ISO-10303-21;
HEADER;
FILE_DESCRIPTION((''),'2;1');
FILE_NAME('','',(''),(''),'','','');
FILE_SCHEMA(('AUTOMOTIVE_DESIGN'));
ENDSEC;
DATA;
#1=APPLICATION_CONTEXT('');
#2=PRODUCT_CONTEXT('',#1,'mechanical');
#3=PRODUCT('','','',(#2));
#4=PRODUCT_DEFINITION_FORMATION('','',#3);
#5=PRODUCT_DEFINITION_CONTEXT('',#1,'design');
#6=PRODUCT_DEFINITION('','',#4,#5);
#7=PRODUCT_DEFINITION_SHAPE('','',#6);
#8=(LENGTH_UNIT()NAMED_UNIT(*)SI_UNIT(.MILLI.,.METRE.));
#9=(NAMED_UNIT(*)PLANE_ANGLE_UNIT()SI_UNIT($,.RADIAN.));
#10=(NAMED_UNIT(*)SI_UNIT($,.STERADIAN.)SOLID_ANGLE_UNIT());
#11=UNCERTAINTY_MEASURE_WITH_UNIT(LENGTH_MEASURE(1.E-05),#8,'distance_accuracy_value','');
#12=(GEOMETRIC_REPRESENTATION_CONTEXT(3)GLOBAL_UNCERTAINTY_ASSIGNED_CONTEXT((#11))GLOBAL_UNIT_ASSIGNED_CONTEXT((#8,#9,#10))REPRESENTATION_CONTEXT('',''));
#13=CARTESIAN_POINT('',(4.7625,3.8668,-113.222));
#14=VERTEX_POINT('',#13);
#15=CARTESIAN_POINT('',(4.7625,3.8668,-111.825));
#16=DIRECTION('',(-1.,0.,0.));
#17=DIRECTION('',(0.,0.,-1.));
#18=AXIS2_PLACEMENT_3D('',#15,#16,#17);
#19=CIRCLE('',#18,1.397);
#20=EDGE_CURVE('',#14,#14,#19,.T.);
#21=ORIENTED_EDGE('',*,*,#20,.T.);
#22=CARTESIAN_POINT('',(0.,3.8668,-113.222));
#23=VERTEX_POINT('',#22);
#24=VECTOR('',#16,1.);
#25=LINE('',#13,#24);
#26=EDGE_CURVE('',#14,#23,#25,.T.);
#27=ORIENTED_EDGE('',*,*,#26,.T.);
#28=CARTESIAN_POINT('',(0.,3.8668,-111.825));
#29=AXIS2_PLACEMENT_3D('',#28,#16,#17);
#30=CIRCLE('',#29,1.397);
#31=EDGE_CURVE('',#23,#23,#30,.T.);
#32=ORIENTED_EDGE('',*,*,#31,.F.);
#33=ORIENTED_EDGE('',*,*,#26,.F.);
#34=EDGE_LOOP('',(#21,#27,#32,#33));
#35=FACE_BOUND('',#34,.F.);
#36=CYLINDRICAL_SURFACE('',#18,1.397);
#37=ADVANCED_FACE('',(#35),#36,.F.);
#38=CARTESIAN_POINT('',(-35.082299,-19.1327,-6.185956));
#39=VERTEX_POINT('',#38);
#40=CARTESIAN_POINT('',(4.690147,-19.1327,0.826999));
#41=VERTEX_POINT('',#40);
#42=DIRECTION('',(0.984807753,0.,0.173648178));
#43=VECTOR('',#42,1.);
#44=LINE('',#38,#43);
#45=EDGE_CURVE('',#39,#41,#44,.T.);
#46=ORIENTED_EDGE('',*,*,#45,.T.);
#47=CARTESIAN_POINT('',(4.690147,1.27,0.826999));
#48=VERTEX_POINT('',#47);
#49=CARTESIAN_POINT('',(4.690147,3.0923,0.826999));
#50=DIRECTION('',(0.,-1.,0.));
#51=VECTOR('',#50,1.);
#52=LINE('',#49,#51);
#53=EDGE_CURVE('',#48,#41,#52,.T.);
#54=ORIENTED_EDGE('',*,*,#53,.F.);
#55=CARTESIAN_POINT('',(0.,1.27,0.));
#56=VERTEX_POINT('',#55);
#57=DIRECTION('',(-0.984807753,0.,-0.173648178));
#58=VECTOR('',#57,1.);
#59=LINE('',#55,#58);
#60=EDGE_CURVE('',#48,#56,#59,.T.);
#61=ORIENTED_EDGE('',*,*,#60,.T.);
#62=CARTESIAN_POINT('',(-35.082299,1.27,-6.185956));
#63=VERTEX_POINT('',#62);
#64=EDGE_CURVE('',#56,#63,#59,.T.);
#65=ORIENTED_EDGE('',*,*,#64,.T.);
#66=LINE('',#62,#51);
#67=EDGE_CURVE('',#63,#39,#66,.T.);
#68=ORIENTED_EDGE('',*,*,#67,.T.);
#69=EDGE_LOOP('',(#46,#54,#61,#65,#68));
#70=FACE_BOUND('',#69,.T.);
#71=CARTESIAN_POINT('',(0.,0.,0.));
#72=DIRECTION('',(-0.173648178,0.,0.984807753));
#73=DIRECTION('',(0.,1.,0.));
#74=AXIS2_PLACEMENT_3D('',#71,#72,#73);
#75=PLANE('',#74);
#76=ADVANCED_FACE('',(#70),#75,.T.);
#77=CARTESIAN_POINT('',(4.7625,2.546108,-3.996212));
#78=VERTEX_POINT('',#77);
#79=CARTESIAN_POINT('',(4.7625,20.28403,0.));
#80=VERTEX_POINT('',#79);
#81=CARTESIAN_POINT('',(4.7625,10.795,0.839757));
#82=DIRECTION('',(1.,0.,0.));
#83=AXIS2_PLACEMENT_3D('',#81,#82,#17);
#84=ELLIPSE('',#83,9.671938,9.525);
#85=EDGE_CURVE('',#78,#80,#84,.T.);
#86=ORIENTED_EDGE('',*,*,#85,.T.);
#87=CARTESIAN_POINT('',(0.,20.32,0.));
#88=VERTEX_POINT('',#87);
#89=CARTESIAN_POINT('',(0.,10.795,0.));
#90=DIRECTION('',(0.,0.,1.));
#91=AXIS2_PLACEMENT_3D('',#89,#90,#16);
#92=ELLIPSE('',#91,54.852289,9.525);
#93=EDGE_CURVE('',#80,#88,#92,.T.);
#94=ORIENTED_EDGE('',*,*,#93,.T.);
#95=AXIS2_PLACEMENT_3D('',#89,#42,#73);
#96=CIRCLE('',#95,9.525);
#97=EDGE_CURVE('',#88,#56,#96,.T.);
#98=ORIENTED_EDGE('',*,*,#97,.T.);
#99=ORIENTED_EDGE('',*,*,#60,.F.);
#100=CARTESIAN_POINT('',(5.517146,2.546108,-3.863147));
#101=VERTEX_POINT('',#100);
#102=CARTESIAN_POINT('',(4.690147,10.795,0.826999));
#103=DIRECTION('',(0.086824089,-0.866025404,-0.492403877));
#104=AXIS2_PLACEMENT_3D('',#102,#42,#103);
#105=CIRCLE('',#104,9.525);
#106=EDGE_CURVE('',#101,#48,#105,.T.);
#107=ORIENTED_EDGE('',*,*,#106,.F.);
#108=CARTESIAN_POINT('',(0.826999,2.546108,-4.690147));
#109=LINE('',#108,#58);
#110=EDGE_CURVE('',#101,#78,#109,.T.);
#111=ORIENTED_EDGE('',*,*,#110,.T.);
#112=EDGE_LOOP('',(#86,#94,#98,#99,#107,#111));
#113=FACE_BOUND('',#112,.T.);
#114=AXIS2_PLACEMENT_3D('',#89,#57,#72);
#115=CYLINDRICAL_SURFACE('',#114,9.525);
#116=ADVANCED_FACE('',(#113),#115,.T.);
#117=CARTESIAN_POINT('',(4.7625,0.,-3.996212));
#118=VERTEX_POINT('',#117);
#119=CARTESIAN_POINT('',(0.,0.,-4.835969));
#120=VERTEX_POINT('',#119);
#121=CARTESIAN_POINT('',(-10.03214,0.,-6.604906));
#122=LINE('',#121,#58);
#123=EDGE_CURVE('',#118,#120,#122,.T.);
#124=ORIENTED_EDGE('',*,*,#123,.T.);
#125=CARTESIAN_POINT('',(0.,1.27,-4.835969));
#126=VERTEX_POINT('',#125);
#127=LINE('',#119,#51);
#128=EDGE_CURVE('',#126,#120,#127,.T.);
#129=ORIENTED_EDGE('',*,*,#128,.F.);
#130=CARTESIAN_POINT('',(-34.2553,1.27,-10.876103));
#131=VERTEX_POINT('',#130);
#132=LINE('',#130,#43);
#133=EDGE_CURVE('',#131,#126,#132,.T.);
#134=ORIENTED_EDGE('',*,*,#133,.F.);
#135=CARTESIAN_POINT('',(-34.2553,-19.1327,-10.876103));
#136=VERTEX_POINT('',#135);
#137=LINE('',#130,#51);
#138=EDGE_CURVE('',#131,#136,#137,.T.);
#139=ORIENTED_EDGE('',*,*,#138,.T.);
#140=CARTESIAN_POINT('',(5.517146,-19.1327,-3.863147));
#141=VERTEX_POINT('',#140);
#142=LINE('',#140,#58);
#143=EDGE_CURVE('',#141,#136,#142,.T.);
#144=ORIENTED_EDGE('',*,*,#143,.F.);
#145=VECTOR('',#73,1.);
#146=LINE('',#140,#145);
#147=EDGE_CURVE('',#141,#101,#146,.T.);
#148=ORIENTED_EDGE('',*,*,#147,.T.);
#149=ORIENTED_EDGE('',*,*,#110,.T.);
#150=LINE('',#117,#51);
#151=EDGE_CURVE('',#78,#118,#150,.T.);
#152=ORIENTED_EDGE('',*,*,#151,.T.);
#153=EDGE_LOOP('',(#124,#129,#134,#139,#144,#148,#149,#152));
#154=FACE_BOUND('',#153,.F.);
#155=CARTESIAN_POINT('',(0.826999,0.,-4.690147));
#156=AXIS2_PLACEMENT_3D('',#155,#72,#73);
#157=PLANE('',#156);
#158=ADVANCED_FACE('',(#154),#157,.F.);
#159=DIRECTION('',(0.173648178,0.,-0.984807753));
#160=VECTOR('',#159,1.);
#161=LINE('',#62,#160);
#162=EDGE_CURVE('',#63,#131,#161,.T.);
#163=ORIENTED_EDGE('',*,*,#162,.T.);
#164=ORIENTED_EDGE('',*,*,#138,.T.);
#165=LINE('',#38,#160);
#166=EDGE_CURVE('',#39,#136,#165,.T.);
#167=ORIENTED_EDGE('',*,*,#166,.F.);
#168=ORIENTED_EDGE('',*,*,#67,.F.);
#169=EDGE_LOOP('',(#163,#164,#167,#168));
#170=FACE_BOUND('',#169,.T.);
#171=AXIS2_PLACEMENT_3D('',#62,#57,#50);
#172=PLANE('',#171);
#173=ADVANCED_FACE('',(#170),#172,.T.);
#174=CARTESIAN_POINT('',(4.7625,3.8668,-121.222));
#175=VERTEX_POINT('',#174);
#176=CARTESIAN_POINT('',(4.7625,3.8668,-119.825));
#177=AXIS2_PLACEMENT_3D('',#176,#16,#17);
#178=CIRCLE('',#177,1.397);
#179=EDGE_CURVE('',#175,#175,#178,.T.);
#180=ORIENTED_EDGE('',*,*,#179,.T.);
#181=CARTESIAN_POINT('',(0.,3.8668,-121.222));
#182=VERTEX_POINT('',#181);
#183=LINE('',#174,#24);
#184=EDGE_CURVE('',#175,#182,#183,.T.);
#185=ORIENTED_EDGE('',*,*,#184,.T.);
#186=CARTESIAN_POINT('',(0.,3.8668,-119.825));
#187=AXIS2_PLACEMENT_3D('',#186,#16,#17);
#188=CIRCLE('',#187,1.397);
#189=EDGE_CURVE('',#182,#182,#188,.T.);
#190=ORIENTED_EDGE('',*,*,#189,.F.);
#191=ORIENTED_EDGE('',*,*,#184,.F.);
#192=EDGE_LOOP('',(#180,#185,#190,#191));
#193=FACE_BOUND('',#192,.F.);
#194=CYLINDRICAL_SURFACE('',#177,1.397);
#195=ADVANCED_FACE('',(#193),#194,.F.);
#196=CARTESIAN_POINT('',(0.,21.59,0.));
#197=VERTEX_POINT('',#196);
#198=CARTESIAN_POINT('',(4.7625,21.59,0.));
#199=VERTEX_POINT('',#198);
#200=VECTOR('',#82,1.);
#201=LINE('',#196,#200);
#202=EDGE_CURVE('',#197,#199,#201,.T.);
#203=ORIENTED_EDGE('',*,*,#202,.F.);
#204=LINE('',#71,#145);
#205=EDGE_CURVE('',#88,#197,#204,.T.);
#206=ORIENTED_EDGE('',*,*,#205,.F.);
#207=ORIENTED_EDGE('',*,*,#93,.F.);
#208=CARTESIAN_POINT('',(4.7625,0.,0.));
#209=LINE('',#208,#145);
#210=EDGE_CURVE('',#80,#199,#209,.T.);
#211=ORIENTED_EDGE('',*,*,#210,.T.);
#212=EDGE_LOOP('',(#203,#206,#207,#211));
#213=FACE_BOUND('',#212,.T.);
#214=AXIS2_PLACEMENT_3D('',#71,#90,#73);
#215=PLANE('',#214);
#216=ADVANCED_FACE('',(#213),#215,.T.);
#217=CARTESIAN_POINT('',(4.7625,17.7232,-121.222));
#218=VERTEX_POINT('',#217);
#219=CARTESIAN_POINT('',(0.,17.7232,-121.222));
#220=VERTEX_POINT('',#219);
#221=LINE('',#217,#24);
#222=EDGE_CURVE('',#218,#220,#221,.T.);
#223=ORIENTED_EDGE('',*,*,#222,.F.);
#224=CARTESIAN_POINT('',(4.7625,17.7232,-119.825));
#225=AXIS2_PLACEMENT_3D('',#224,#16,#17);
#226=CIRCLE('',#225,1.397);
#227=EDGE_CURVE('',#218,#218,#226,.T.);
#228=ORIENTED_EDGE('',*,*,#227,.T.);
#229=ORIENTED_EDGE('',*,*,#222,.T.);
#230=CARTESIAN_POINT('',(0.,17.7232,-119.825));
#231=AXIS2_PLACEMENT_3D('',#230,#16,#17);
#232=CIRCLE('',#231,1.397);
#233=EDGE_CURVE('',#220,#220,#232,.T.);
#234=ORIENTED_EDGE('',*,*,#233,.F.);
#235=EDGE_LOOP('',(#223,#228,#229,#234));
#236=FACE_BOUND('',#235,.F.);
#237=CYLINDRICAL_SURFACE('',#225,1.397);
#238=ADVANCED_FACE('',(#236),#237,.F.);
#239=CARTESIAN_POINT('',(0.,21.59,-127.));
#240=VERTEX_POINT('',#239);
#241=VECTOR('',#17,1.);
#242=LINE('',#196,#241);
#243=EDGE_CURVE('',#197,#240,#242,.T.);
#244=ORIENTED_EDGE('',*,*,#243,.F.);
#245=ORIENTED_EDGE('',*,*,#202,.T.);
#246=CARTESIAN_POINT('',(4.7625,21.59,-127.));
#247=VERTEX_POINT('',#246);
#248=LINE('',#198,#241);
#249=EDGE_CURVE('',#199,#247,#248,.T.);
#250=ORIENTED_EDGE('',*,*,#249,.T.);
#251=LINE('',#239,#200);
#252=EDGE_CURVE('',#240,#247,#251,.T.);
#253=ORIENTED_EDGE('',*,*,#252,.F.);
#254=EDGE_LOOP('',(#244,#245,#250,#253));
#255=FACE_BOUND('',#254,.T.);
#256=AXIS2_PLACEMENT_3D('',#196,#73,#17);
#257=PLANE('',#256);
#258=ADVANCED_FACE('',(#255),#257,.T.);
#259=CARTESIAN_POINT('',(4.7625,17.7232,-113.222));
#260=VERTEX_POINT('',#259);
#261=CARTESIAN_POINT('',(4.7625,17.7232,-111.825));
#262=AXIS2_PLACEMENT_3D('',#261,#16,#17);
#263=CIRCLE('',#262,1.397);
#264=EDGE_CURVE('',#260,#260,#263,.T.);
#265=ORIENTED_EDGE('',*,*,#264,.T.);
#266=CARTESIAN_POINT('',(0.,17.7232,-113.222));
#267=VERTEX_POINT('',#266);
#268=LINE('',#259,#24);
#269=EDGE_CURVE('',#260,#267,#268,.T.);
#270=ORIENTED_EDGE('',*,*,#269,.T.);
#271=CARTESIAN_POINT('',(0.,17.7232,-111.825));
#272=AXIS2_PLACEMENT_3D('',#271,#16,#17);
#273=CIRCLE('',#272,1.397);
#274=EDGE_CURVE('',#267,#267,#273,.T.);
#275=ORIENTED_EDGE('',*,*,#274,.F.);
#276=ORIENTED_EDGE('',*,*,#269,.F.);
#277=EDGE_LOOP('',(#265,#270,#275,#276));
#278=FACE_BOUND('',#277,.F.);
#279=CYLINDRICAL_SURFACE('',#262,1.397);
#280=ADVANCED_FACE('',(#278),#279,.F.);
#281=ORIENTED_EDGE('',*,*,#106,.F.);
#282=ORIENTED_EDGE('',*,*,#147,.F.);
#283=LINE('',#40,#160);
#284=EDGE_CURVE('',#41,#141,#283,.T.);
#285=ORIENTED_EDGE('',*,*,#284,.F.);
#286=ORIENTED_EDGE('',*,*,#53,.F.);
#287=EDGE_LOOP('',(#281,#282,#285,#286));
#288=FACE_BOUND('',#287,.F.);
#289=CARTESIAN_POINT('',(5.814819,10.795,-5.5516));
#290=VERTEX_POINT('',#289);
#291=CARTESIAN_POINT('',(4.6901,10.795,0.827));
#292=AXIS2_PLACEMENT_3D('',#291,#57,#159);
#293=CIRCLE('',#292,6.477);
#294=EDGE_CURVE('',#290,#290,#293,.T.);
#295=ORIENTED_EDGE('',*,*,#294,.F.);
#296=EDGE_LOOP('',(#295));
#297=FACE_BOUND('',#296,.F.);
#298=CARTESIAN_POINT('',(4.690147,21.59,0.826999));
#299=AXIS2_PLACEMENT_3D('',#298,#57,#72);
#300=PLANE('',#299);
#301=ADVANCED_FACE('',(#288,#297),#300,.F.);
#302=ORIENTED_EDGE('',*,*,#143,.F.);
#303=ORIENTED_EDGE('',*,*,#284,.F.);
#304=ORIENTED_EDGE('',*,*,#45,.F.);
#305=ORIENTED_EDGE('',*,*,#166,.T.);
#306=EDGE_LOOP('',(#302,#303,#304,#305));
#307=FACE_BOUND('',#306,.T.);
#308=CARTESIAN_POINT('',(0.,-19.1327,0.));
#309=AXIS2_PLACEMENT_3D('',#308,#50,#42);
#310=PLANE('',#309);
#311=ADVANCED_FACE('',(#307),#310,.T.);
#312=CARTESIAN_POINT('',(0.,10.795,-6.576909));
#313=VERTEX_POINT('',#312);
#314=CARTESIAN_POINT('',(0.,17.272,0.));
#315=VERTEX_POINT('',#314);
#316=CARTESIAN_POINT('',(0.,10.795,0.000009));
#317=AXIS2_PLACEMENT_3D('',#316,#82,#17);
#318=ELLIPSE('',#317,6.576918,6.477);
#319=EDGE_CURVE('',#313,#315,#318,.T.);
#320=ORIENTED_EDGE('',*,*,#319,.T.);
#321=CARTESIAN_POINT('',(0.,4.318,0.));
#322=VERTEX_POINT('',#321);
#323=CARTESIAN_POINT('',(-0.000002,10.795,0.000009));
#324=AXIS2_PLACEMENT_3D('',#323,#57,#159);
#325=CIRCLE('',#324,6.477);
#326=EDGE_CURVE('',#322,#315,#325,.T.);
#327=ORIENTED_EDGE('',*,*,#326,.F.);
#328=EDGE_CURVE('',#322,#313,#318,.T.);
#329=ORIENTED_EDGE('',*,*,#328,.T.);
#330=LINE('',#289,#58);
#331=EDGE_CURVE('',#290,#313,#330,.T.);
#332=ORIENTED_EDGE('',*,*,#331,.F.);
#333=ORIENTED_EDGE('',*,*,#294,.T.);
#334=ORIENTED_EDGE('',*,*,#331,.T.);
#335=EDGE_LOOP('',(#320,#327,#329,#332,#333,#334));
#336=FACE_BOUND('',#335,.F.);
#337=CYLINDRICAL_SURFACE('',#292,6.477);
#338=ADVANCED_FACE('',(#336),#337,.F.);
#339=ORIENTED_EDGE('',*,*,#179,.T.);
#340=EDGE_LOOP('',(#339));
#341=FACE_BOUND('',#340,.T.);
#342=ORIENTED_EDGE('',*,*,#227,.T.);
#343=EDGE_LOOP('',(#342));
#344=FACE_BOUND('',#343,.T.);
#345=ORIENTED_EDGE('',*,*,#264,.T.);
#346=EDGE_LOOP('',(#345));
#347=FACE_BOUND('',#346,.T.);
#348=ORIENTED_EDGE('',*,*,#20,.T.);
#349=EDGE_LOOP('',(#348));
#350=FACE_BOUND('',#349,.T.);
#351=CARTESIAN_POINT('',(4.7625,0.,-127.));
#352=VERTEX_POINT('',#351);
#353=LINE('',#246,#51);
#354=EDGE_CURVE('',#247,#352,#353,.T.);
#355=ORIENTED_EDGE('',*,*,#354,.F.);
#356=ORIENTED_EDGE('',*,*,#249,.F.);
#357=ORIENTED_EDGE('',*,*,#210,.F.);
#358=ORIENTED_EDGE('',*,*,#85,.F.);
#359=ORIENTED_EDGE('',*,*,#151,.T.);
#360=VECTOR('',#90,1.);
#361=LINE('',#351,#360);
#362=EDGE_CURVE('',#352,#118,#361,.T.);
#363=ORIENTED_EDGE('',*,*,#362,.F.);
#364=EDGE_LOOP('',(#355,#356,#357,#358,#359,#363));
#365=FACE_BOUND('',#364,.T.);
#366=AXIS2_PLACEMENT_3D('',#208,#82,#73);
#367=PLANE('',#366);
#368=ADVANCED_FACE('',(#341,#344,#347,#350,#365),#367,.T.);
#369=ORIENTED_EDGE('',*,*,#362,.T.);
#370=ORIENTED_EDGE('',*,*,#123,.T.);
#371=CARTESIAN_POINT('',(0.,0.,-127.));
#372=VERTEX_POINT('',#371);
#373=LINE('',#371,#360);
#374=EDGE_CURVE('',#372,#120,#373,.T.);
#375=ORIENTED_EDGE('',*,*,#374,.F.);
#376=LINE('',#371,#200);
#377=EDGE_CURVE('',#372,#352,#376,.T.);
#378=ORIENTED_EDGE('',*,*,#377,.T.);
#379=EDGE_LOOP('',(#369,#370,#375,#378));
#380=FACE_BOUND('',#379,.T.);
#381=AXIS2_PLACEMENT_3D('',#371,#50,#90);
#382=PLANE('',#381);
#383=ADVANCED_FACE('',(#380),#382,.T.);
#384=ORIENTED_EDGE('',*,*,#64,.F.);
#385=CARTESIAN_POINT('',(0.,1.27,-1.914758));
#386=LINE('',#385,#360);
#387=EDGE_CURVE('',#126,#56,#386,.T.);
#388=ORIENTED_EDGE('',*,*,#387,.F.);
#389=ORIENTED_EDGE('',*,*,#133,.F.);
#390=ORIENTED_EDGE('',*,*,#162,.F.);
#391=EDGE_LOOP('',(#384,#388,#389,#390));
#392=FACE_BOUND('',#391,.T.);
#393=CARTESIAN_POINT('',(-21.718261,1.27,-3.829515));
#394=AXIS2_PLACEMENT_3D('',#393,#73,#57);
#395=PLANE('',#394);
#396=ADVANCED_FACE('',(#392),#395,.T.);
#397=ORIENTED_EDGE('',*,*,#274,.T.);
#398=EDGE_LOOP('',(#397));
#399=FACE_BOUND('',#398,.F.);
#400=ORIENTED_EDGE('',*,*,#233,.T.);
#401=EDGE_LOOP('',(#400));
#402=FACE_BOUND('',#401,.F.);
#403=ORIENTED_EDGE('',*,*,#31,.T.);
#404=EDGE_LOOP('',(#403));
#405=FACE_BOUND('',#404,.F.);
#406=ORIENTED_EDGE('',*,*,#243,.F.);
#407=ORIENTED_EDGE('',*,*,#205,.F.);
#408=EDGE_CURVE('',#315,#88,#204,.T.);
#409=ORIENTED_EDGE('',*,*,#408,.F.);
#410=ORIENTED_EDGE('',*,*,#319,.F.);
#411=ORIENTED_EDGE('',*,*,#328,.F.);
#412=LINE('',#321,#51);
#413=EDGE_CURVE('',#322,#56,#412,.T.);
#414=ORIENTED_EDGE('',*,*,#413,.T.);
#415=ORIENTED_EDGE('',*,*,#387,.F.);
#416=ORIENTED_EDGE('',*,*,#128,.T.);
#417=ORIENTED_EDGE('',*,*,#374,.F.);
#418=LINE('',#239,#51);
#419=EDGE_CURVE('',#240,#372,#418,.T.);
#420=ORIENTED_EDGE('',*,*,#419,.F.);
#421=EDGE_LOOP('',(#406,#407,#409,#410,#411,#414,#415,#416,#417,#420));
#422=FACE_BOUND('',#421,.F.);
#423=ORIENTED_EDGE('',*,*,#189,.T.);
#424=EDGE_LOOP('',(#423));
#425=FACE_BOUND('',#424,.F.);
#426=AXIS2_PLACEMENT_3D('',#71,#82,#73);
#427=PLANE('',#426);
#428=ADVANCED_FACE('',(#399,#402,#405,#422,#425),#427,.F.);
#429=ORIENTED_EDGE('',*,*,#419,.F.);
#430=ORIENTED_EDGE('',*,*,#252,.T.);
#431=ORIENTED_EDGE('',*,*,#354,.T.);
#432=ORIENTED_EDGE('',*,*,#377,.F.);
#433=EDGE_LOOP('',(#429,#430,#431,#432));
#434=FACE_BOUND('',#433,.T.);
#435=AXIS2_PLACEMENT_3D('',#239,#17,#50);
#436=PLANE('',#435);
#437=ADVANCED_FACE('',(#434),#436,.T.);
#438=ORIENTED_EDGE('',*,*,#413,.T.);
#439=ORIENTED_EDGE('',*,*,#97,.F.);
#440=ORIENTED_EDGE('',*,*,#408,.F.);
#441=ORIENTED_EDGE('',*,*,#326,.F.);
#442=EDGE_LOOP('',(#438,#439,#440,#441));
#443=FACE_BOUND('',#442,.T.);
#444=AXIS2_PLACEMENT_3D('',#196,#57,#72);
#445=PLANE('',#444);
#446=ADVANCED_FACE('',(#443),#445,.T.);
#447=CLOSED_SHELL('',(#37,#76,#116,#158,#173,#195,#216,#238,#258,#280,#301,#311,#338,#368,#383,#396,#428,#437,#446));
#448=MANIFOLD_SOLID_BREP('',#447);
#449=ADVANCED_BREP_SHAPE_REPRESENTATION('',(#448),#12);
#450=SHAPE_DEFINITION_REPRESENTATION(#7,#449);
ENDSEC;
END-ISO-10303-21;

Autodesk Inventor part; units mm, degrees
ref_plane "YZ Plane" through (0, 0, 0) normal (1, 0, 0) x (0, 1, 0)
ref_plane "XZ Plane" through (0, 0, 0) normal (0, 1, 0) x (-1, 0, 0)
ref_plane "XY Plane" through (0, 0, 0) normal (0, 0, 1) x (1, 0, 0)
sketch "Sketch1" plane through (0, 0, 0) normal (1, 0, 0) x (0, 1, 0)
  line L0 (0, 0) -> (21.59, 0)
  line L1 (21.59, 0) -> (21.59, -127)
  line L2 (21.59, -127) -> (0, -127)
  line L3 (0, -127) -> (0, 0)
  dimension "d0" = 21.59
  dimension "d1" = 127
extrude "Extrusion1" add sketch "Sketch1" along normal blind 4.7625
sketch "Sketch2" plane through (0, 21.59, 0) normal (0, 1, 0) x (1, 0, 0)
  line L0 (0, 0) -> (-3.2071, -18.1884)
  line L1 (0, 0) -> (18.469, 0) construction
  line L2 (0, 0) -> (13.0579, -2.3025)
  line L3 (0, 0) -> (13.2594, 0) construction
  dimension "d4" = 100
  dimension "d24" = 10
ref_plane "Work Plane1" through (0, 21.59, 0) normal (-0.9848078, 0, -0.1736482) x (-0.1736482, 0, 0.9848078)
sketch "Sketch3" plane through (0, 21.59, 0) normal (-0.9848078, 0, -0.1736482) x (-0.1736482, 0, 0.9848078)
  line L0 (-0.827, 0) -> (-0.827, -21.59) projected
  line L1 (-0.827, -21.59) -> (-125.8976, -21.59) projected
  line L2 (-125.8976, -21.59) -> (-125.8976, 0) projected
  line L3 (-125.8976, 0) -> (-0.827, 0) projected
  line L4 (0, -21.59) -> (0, 0) projected
  line L5 (0, -21.59) -> (-0.827, -21.59) projected
  line L6 (-0.827, 0) -> (-0.827, -21.59) projected
  line L7 (0, 0) -> (-0.827, 0) projected
  line L8 (0, -21.59) -> (0, 0) projected
  circle A0 centre (0, -10.795) radius 9.525
  dimension "d5" = 19.05
  dimension "d6" = 21.59
  dimension "d7" = 10.795
extrude "Extrusion2" add sketch "Sketch3" against normal blind 4.7625 contours A0 L4 L0 | L0 A0 | A0 L4
sketch "Sketch5" plane through (4.6901, 10.795, 0.827) normal (0.9848078, 0, 0.1736482) x (0.1736482, 0, -0.9848078)
  circle A0 centre (0, 0) radius 9.525 projected
  point P0 (0, -10.795)
hole "Hole2" at (4.6901, 10.795, 0.827) direction (-0.9848078, 0, -0.1736482) diameter 12.954 end through all
ref_plane "Work Plane3" through (0, 0, 0) normal (-0.1736482, 0, 0.9848078) x (0, 1, 0)
sketch "Sketch9" plane through (4.7625, 0, 0) normal (1, 0, 0) x (0, 0, -1)
  line L0 (0, 0) -> (127, 0) projected
  line L1 (127, 0) -> (127, 21.59) projected
  line L2 (127, 21.59) -> (0, 21.59) projected
  line L3 (0, 21.59) -> (0, 20.284) projected
  ellipse E0 centre (-0.8398, 10.795) end of major axis (8.8322, 10.795) minor radius 9.525 (0, 1.306) -> (0, 20.284) ccw projected
  circle A0 centre (115.825, 10.795) radius 8
  line L4 (111.825, 17.7232) -> (119.825, 17.7232)
  line L5 (119.825, 17.7232) -> (119.825, 3.8668)
  line L6 (119.825, 3.8668) -> (111.825, 3.8668)
  line L7 (111.825, 3.8668) -> (111.825, 17.7232)
  line L8 (0, 1.306) -> (0, 0) projected
  dimension "d34" = 16
  dimension "d35" = 8
  dimension "d36" = 4
  dimension "d37" = 21.59
  dimension "d38" = 10.795
  dimension "d39" = 11.175
hole "Hole3" at (4.7625, 17.7232, -111.825) at (4.7625, 17.7232, -119.825) at (4.7625, 3.8668, -119.825) at (4.7625, 3.8668, -111.825) direction (-1, 0, 0) diameter 2.794 end through all
sketch "Sketch10" plane through (0, 0, 0) normal (-0.1736482, 0, 0.9848078) x (0, 1, 0)
  ellipse E0 centre (10.795, 0) end of major axis (10.795, -54.019) minor radius 9.525 (20.284, -4.6901) -> (1.27, 0) ccw projected
  line L0 (1.27, 0) -> (20.32, 0) projected
  ellipse E1 centre (10.795, 0) end of major axis (10.795, -54.019) minor radius 9.525 (20.32, 0) -> (1.306, -4.6901) ccw projected
  ellipse E2 centre (10.795, -4.836) end of major axis (1.27, -4.836) minor radius 1.6795 (20.284, -4.6901) -> (1.306, -4.6901) ccw projected
  line L1 (1.27, -4.7625) -> (20.32, -4.7625) projected
  ellipse E3 centre (3.8668, 20.8074) end of major axis (5.2638, 20.8074) minor radius 0.2426 projected
  ellipse E4 centre (17.7232, 19.4182) end of major axis (19.1202, 19.4182) minor radius 0.2426 projected
  ellipse E5 centre (17.7232, 20.8074) end of major axis (19.1202, 20.8074) minor radius 0.2426 projected
  ellipse E6 centre (3.8668, 19.4182) end of major axis (5.2638, 19.4182) minor radius 0.2426 projected
  ellipse E7 centre (10.795, 0) end of major axis (17.272, 0) minor radius 1.1421 (17.272, 0) -> (4.318, 0) ccw projected
  line L2 (17.272, 0) -> (20.32, 0) projected
  line L3 (20.32, 0) -> (21.59, 0) projected
  line L4 (21.59, 0) -> (21.59, 22.0533) projected
  line L5 (21.59, 22.0533) -> (0, 22.0533) projected
  line L6 (0, 22.0533) -> (0, 0) projected
  line L7 (0, 0) -> (1.27, 0) projected
  line L8 (1.27, 0) -> (4.318, 0) projected
  line L9 (20.32, 0) -> (1.27, 0) projected
  line L10 (3.0923, 0) -> (1.27, 0)
  line L11 (-19.1327, 0) -> (-19.1327, -4.7625)
  line L12 (-19.1327, -4.7625) -> (3.0923, -4.7625)
  line L13 (3.0923, -4.7625) -> (3.0923, 0)
  line L14 (-19.1327, -4.7625) -> (1.27, -4.7625)
  line L15 (1.27, 0) -> (1.27, 35.6235)
  line L16 (1.27, 35.6235) -> (-19.1327, 35.6235)
  line L17 (-19.1327, 35.6235) -> (-19.1327, -4.7625)
  dimension "d47" = 22.225
  dimension "d50" = 20.4027
  dimension "d53" = 4.7625
  dimension "d54" = 40.386
extrude "Extrusion4" add sketch "Sketch10" against normal blind 4.7625 contours L13 L1 L12 L11 L17 L16 L15 L5 L6 L7 E1 E2 | E2 E1 L0 L13 | L7 L6 L5 L15
equation "\"d7\" = 0.5 * d6"
equation "\"d36\" = 0.5 * d35"
equation "\"d38\" = 0.5 * d37"
properties part number "WheelIntakeMotorMount2.0"
